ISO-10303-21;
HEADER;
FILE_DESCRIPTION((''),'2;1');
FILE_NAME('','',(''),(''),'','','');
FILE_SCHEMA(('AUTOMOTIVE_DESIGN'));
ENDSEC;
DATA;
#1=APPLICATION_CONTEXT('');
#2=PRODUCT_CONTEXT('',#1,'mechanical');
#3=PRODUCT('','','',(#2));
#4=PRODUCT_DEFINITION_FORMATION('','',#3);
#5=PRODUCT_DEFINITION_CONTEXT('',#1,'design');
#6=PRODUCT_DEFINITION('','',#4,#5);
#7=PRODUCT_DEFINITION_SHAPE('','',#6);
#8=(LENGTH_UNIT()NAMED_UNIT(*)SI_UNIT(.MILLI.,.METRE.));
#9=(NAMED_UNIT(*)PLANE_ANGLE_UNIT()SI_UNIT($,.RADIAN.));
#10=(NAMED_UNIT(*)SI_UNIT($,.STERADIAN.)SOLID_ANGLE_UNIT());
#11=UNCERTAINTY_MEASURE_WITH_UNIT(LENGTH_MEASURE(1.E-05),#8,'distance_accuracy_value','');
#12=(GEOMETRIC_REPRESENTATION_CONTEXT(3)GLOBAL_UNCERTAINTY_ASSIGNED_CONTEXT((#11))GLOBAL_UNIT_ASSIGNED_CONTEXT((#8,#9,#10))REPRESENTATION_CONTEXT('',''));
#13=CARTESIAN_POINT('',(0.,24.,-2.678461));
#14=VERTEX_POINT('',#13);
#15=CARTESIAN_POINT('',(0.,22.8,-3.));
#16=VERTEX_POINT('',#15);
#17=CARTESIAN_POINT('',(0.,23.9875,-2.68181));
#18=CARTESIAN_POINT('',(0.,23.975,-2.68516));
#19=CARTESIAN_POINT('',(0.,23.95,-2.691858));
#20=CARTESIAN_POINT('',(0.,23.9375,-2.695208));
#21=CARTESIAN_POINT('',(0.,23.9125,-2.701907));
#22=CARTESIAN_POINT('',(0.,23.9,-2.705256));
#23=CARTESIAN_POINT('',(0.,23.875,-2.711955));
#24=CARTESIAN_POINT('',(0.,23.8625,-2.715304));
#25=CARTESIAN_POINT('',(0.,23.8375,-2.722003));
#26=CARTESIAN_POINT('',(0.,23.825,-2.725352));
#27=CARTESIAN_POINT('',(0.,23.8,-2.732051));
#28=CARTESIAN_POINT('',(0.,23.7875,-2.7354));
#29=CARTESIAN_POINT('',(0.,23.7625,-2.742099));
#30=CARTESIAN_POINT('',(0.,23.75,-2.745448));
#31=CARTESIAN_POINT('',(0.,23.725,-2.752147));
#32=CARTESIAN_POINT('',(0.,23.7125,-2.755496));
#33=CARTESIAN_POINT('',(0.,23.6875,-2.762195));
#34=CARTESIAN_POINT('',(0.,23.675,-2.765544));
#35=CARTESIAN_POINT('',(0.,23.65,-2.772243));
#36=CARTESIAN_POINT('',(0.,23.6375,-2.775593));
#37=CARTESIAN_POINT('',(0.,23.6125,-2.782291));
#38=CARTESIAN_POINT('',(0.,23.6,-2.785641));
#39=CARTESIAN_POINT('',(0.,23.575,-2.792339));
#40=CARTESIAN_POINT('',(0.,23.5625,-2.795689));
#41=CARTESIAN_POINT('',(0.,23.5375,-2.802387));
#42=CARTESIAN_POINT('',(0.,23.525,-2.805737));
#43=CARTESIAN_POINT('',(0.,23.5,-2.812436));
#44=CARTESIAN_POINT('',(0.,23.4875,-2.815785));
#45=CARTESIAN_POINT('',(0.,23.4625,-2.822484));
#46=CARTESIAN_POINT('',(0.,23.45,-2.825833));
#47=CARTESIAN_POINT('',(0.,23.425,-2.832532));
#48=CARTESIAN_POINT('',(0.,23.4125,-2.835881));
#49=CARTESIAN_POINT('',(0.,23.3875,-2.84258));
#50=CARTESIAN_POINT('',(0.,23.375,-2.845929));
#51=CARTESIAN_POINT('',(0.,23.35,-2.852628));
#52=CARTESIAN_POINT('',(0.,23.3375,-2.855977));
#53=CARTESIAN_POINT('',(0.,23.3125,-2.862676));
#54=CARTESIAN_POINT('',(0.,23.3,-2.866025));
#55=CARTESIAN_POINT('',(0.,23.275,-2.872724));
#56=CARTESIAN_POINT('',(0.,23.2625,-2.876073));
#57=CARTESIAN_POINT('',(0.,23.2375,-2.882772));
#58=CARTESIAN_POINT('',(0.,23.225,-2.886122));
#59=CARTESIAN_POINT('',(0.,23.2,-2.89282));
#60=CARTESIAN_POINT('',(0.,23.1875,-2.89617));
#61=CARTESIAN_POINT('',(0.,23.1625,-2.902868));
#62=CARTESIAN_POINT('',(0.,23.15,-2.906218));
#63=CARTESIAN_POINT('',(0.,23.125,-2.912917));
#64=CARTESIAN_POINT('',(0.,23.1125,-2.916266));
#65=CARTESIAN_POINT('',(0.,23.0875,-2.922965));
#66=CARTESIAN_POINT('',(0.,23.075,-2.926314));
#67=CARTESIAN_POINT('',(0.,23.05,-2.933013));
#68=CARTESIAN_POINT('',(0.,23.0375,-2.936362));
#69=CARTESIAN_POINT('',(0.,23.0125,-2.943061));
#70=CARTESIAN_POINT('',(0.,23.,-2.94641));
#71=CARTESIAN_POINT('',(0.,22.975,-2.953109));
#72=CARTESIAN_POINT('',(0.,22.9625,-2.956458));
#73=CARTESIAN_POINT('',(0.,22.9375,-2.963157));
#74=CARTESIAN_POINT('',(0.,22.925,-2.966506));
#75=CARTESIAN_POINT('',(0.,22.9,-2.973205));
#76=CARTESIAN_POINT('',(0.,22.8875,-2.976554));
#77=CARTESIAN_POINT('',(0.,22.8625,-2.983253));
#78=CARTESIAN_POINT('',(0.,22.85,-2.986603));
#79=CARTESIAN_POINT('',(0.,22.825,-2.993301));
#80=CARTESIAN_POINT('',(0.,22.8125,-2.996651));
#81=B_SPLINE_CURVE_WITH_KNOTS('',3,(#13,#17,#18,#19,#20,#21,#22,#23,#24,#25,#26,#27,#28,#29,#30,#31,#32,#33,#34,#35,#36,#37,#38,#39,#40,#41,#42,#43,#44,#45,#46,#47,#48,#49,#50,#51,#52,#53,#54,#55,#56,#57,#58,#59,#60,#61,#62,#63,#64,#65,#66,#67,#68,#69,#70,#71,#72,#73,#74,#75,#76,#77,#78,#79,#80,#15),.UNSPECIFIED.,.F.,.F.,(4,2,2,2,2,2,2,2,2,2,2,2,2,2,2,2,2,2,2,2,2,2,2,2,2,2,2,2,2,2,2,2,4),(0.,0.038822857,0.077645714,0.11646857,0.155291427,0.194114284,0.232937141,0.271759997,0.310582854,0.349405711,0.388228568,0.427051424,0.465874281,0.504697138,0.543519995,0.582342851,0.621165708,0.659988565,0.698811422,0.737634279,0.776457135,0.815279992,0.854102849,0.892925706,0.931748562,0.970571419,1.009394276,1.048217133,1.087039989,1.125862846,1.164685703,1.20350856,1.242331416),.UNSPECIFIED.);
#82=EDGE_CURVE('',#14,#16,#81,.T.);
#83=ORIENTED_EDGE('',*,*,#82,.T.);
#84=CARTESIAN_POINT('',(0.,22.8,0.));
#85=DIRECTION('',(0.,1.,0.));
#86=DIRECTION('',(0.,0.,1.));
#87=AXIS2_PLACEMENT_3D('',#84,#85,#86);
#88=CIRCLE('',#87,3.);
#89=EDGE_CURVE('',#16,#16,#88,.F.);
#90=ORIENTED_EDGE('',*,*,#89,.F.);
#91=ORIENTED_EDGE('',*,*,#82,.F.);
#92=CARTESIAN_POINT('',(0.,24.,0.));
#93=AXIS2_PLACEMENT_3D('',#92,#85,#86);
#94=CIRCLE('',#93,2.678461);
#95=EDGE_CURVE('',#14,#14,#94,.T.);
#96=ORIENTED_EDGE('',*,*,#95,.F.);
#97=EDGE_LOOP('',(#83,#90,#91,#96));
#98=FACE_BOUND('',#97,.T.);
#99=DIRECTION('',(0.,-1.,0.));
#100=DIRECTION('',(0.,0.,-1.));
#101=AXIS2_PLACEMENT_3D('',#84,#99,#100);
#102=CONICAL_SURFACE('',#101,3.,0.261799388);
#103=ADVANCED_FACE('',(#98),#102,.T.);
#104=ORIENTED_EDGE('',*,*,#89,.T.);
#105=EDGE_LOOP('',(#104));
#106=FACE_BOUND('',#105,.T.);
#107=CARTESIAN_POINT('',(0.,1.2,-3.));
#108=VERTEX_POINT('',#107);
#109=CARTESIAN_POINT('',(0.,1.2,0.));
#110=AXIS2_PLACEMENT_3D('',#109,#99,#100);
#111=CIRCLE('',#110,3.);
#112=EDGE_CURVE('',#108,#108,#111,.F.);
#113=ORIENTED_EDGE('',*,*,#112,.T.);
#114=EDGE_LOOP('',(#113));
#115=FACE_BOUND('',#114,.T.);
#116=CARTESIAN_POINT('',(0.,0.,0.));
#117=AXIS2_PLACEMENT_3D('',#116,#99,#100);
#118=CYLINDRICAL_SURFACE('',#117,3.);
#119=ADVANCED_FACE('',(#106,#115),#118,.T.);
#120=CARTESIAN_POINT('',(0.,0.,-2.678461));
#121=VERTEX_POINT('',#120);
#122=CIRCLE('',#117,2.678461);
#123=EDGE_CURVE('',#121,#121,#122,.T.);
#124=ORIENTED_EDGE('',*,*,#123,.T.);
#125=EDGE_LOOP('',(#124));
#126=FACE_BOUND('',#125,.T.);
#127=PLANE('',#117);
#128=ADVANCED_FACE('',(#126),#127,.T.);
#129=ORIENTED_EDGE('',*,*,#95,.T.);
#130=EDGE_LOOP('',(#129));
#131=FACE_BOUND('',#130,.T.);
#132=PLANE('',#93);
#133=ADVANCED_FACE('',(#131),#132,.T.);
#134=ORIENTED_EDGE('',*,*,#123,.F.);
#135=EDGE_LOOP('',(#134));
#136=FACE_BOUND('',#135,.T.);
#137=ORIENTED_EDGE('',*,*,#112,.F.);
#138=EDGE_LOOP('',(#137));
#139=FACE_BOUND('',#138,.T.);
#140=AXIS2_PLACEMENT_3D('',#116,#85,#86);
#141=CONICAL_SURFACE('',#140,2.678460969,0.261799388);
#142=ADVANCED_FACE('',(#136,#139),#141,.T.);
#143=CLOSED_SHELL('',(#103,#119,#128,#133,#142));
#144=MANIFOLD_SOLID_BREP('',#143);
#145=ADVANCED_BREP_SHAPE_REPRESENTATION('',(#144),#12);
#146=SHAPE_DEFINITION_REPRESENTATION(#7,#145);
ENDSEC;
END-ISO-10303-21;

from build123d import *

# Parameters (mm, degrees)
SKE_W          = 3
SKE_H          = 24
CHAMFER2_SIZE  = 1.2
CHAMFER2_SIZE2 = 0.321539031
CHAMFER1_SIZE  = 1.2
CHAMFER1_SIZE2 = 0.321539031


with BuildPart() as part:
    # Ske → Base-Rev (revolve)
    with BuildSketch(Plane.XY):
        with Locations((1.5, 12)):
            Rectangle(SKE_W, SKE_H)
    revolve(axis=Axis((0, 0, 0), (0, 1, 0)))

    # Chamfer2
    chamfer2_edges = [part.edges().sort_by_distance(p)[0] for p in [
        (-3, 0, 0),
    ]]
    chamfer2_side = [part.faces().sort_by_distance(p)[0] for p in [
        (-3, 12, 0),
    ]]
    chamfer(chamfer2_edges, length=CHAMFER2_SIZE, length2=CHAMFER2_SIZE2, reference=chamfer2_side[0])

    # Chamfer1
    chamfer1_edges = [part.edges().sort_by_distance(p)[0] for p in [
        (-3, 24, 0),
    ]]
    chamfer1_side = [part.faces().sort_by_distance(p)[0] for p in [
        (-3, 12.6, 0),
    ]]
    chamfer(chamfer1_edges, length=CHAMFER1_SIZE, length2=CHAMFER1_SIZE2, reference=chamfer1_side[0])


solid = part.part
